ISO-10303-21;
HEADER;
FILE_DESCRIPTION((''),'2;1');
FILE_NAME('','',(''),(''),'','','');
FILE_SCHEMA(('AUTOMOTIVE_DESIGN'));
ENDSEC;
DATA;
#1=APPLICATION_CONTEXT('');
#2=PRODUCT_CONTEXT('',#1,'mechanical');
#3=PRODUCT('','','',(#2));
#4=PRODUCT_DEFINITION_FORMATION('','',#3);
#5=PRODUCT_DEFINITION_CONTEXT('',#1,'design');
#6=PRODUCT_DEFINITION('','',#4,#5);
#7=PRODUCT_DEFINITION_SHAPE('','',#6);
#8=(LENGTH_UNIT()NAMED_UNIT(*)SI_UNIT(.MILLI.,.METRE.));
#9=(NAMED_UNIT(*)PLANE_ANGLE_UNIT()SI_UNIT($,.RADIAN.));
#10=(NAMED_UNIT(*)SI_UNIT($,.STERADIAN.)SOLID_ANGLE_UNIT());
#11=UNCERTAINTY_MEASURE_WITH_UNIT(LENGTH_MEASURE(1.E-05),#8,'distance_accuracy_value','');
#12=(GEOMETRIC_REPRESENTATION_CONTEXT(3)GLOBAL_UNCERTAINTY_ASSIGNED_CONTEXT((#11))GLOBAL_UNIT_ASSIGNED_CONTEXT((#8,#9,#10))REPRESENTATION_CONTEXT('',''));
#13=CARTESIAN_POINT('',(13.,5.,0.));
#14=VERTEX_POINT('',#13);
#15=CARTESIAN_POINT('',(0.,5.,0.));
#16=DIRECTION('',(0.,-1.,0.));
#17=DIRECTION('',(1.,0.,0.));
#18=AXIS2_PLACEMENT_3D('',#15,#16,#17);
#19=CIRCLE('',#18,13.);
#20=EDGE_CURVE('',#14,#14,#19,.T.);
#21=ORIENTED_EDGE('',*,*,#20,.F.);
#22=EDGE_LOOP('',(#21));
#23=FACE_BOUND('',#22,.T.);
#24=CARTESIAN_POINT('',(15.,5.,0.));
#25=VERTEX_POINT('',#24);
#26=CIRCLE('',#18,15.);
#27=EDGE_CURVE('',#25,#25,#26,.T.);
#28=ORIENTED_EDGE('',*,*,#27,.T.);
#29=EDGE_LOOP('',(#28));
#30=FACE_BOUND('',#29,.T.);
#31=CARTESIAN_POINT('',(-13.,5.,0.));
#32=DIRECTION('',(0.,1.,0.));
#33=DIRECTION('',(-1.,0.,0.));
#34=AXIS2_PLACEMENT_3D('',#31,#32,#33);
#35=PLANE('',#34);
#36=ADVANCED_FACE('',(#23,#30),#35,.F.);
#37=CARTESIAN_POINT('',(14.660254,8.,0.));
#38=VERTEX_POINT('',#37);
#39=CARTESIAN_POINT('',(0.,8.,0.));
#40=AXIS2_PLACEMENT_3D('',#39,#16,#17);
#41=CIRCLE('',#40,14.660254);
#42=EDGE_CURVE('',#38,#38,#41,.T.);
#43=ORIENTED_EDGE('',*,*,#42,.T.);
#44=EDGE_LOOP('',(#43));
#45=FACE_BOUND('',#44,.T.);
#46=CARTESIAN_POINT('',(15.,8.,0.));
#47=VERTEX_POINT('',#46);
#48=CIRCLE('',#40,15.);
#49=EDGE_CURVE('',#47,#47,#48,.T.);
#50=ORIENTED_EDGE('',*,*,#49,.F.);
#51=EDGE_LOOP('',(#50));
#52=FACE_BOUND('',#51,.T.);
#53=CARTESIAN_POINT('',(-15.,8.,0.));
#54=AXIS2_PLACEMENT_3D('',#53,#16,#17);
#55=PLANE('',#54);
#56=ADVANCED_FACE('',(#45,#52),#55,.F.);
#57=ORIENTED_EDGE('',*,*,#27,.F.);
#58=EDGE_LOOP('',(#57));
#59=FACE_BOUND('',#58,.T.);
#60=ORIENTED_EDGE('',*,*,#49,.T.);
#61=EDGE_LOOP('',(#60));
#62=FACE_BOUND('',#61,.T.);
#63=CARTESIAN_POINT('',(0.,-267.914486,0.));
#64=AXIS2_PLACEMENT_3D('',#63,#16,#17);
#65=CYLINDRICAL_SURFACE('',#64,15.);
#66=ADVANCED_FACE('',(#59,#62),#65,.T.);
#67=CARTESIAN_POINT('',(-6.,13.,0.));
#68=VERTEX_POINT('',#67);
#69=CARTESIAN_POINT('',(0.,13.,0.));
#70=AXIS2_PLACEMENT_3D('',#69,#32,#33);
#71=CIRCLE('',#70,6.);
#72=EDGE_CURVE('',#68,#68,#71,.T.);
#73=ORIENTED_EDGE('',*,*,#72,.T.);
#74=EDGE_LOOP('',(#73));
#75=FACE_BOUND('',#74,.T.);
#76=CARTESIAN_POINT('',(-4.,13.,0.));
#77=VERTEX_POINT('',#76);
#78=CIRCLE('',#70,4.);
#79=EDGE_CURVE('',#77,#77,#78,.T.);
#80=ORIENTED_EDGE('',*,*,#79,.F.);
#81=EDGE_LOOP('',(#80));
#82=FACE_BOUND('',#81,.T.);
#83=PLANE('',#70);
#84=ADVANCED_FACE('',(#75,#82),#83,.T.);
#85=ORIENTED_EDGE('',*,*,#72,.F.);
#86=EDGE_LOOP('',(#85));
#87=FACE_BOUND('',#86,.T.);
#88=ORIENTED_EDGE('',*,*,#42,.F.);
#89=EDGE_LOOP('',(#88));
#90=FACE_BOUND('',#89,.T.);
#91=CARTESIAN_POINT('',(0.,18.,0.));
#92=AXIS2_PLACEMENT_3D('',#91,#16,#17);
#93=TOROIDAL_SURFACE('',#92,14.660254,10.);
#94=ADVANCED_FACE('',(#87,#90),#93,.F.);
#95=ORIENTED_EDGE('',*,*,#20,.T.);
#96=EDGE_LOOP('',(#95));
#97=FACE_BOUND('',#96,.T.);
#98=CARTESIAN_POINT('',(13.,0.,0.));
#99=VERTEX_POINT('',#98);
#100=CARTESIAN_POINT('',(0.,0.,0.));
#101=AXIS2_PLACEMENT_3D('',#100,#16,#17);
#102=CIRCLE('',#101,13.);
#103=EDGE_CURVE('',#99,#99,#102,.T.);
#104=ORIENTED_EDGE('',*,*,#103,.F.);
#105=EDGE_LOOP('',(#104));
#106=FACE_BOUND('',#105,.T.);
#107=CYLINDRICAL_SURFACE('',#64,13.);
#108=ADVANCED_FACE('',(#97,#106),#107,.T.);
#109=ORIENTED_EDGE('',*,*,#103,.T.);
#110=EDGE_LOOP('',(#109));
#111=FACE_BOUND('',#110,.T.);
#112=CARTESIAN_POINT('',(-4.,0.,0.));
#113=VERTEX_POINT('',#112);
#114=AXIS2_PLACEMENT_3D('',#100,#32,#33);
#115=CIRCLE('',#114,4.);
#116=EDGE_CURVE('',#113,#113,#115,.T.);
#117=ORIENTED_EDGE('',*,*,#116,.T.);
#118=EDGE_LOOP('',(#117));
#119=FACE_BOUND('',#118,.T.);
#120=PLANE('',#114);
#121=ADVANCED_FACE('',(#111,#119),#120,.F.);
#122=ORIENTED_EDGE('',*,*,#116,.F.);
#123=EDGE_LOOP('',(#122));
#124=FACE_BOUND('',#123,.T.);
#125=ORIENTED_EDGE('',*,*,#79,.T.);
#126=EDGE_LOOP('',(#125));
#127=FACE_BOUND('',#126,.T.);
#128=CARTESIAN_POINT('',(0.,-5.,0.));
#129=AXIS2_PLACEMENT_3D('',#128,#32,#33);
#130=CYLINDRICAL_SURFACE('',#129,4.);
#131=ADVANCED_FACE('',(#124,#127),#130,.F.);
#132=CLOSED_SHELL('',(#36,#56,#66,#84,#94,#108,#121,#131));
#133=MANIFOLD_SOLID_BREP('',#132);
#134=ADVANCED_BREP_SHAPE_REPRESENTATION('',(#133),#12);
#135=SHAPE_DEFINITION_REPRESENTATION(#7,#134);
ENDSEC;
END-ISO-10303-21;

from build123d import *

# Parameters (mm, degrees)
SKETCH_2_R          = 6
EXTRUDE_1_DEPTH     = 5
FILLET_2_R          = 10
SKETCH_3_R          = 4
CUT_EXTRUDE_1_DEPTH = 18


with BuildPart() as part:
    # 草图1 → 旋转1 (revolve)
    with BuildSketch(Plane.XY, mode=Mode.PRIVATE) as revolve_1_sk:
        Polygon((0, 0), (-13, 0), (-13, 5), (-15, 5), (-15, 8), (0, 8), align=None)
    revolve(revolve_1_sk.sketch.rotate(Axis((0, -267.914485955, 0), (0, 1, 0)), 180), axis=Axis((0, -267.914485955, 0), (0, 1, 0)))

    # 草图2 → 凸台-拉伸1 (add)
    with BuildSketch(Plane(origin=(0, 8, 0), x_dir=(1, 0, 0), z_dir=(0, 1, 0))):
        with Locations(Location((0, 0, 0), (0, 0, 180))):
            Circle(SKETCH_2_R)
    extrude(amount=EXTRUDE_1_DEPTH)

    # 圆角2
    # the kernel refuses this fillet: 10 mm, written as the material it adds along each edge
    with BuildSketch(Plane(origin=(0, 8, 0), x_dir=(-1, 0, 0), z_dir=(0, 0, -1))) as fillet_2_piece_1:
        with BuildLine():
            CenterArc((14.660254038, 10), FILLET_2_R, 210, 60)
            Line((6, 5), (6, 0))
            Line((6, 0), (14.660254038, 0))
        make_face()
    revolve(axis=Axis((0, 8, 0), (0, 1, 0)))

    # 草图3 → 切除-拉伸1 (cut)
    with BuildSketch(Plane(origin=(0, 13, 0), x_dir=(1, 0, 0), z_dir=(0, 1, 0))):
        with Locations(Location((0, 0, 0), (0, 0, 180))):
            Circle(SKETCH_3_R)
    extrude(amount=-CUT_EXTRUDE_1_DEPTH, mode=Mode.SUBTRACT)


solid = part.part
